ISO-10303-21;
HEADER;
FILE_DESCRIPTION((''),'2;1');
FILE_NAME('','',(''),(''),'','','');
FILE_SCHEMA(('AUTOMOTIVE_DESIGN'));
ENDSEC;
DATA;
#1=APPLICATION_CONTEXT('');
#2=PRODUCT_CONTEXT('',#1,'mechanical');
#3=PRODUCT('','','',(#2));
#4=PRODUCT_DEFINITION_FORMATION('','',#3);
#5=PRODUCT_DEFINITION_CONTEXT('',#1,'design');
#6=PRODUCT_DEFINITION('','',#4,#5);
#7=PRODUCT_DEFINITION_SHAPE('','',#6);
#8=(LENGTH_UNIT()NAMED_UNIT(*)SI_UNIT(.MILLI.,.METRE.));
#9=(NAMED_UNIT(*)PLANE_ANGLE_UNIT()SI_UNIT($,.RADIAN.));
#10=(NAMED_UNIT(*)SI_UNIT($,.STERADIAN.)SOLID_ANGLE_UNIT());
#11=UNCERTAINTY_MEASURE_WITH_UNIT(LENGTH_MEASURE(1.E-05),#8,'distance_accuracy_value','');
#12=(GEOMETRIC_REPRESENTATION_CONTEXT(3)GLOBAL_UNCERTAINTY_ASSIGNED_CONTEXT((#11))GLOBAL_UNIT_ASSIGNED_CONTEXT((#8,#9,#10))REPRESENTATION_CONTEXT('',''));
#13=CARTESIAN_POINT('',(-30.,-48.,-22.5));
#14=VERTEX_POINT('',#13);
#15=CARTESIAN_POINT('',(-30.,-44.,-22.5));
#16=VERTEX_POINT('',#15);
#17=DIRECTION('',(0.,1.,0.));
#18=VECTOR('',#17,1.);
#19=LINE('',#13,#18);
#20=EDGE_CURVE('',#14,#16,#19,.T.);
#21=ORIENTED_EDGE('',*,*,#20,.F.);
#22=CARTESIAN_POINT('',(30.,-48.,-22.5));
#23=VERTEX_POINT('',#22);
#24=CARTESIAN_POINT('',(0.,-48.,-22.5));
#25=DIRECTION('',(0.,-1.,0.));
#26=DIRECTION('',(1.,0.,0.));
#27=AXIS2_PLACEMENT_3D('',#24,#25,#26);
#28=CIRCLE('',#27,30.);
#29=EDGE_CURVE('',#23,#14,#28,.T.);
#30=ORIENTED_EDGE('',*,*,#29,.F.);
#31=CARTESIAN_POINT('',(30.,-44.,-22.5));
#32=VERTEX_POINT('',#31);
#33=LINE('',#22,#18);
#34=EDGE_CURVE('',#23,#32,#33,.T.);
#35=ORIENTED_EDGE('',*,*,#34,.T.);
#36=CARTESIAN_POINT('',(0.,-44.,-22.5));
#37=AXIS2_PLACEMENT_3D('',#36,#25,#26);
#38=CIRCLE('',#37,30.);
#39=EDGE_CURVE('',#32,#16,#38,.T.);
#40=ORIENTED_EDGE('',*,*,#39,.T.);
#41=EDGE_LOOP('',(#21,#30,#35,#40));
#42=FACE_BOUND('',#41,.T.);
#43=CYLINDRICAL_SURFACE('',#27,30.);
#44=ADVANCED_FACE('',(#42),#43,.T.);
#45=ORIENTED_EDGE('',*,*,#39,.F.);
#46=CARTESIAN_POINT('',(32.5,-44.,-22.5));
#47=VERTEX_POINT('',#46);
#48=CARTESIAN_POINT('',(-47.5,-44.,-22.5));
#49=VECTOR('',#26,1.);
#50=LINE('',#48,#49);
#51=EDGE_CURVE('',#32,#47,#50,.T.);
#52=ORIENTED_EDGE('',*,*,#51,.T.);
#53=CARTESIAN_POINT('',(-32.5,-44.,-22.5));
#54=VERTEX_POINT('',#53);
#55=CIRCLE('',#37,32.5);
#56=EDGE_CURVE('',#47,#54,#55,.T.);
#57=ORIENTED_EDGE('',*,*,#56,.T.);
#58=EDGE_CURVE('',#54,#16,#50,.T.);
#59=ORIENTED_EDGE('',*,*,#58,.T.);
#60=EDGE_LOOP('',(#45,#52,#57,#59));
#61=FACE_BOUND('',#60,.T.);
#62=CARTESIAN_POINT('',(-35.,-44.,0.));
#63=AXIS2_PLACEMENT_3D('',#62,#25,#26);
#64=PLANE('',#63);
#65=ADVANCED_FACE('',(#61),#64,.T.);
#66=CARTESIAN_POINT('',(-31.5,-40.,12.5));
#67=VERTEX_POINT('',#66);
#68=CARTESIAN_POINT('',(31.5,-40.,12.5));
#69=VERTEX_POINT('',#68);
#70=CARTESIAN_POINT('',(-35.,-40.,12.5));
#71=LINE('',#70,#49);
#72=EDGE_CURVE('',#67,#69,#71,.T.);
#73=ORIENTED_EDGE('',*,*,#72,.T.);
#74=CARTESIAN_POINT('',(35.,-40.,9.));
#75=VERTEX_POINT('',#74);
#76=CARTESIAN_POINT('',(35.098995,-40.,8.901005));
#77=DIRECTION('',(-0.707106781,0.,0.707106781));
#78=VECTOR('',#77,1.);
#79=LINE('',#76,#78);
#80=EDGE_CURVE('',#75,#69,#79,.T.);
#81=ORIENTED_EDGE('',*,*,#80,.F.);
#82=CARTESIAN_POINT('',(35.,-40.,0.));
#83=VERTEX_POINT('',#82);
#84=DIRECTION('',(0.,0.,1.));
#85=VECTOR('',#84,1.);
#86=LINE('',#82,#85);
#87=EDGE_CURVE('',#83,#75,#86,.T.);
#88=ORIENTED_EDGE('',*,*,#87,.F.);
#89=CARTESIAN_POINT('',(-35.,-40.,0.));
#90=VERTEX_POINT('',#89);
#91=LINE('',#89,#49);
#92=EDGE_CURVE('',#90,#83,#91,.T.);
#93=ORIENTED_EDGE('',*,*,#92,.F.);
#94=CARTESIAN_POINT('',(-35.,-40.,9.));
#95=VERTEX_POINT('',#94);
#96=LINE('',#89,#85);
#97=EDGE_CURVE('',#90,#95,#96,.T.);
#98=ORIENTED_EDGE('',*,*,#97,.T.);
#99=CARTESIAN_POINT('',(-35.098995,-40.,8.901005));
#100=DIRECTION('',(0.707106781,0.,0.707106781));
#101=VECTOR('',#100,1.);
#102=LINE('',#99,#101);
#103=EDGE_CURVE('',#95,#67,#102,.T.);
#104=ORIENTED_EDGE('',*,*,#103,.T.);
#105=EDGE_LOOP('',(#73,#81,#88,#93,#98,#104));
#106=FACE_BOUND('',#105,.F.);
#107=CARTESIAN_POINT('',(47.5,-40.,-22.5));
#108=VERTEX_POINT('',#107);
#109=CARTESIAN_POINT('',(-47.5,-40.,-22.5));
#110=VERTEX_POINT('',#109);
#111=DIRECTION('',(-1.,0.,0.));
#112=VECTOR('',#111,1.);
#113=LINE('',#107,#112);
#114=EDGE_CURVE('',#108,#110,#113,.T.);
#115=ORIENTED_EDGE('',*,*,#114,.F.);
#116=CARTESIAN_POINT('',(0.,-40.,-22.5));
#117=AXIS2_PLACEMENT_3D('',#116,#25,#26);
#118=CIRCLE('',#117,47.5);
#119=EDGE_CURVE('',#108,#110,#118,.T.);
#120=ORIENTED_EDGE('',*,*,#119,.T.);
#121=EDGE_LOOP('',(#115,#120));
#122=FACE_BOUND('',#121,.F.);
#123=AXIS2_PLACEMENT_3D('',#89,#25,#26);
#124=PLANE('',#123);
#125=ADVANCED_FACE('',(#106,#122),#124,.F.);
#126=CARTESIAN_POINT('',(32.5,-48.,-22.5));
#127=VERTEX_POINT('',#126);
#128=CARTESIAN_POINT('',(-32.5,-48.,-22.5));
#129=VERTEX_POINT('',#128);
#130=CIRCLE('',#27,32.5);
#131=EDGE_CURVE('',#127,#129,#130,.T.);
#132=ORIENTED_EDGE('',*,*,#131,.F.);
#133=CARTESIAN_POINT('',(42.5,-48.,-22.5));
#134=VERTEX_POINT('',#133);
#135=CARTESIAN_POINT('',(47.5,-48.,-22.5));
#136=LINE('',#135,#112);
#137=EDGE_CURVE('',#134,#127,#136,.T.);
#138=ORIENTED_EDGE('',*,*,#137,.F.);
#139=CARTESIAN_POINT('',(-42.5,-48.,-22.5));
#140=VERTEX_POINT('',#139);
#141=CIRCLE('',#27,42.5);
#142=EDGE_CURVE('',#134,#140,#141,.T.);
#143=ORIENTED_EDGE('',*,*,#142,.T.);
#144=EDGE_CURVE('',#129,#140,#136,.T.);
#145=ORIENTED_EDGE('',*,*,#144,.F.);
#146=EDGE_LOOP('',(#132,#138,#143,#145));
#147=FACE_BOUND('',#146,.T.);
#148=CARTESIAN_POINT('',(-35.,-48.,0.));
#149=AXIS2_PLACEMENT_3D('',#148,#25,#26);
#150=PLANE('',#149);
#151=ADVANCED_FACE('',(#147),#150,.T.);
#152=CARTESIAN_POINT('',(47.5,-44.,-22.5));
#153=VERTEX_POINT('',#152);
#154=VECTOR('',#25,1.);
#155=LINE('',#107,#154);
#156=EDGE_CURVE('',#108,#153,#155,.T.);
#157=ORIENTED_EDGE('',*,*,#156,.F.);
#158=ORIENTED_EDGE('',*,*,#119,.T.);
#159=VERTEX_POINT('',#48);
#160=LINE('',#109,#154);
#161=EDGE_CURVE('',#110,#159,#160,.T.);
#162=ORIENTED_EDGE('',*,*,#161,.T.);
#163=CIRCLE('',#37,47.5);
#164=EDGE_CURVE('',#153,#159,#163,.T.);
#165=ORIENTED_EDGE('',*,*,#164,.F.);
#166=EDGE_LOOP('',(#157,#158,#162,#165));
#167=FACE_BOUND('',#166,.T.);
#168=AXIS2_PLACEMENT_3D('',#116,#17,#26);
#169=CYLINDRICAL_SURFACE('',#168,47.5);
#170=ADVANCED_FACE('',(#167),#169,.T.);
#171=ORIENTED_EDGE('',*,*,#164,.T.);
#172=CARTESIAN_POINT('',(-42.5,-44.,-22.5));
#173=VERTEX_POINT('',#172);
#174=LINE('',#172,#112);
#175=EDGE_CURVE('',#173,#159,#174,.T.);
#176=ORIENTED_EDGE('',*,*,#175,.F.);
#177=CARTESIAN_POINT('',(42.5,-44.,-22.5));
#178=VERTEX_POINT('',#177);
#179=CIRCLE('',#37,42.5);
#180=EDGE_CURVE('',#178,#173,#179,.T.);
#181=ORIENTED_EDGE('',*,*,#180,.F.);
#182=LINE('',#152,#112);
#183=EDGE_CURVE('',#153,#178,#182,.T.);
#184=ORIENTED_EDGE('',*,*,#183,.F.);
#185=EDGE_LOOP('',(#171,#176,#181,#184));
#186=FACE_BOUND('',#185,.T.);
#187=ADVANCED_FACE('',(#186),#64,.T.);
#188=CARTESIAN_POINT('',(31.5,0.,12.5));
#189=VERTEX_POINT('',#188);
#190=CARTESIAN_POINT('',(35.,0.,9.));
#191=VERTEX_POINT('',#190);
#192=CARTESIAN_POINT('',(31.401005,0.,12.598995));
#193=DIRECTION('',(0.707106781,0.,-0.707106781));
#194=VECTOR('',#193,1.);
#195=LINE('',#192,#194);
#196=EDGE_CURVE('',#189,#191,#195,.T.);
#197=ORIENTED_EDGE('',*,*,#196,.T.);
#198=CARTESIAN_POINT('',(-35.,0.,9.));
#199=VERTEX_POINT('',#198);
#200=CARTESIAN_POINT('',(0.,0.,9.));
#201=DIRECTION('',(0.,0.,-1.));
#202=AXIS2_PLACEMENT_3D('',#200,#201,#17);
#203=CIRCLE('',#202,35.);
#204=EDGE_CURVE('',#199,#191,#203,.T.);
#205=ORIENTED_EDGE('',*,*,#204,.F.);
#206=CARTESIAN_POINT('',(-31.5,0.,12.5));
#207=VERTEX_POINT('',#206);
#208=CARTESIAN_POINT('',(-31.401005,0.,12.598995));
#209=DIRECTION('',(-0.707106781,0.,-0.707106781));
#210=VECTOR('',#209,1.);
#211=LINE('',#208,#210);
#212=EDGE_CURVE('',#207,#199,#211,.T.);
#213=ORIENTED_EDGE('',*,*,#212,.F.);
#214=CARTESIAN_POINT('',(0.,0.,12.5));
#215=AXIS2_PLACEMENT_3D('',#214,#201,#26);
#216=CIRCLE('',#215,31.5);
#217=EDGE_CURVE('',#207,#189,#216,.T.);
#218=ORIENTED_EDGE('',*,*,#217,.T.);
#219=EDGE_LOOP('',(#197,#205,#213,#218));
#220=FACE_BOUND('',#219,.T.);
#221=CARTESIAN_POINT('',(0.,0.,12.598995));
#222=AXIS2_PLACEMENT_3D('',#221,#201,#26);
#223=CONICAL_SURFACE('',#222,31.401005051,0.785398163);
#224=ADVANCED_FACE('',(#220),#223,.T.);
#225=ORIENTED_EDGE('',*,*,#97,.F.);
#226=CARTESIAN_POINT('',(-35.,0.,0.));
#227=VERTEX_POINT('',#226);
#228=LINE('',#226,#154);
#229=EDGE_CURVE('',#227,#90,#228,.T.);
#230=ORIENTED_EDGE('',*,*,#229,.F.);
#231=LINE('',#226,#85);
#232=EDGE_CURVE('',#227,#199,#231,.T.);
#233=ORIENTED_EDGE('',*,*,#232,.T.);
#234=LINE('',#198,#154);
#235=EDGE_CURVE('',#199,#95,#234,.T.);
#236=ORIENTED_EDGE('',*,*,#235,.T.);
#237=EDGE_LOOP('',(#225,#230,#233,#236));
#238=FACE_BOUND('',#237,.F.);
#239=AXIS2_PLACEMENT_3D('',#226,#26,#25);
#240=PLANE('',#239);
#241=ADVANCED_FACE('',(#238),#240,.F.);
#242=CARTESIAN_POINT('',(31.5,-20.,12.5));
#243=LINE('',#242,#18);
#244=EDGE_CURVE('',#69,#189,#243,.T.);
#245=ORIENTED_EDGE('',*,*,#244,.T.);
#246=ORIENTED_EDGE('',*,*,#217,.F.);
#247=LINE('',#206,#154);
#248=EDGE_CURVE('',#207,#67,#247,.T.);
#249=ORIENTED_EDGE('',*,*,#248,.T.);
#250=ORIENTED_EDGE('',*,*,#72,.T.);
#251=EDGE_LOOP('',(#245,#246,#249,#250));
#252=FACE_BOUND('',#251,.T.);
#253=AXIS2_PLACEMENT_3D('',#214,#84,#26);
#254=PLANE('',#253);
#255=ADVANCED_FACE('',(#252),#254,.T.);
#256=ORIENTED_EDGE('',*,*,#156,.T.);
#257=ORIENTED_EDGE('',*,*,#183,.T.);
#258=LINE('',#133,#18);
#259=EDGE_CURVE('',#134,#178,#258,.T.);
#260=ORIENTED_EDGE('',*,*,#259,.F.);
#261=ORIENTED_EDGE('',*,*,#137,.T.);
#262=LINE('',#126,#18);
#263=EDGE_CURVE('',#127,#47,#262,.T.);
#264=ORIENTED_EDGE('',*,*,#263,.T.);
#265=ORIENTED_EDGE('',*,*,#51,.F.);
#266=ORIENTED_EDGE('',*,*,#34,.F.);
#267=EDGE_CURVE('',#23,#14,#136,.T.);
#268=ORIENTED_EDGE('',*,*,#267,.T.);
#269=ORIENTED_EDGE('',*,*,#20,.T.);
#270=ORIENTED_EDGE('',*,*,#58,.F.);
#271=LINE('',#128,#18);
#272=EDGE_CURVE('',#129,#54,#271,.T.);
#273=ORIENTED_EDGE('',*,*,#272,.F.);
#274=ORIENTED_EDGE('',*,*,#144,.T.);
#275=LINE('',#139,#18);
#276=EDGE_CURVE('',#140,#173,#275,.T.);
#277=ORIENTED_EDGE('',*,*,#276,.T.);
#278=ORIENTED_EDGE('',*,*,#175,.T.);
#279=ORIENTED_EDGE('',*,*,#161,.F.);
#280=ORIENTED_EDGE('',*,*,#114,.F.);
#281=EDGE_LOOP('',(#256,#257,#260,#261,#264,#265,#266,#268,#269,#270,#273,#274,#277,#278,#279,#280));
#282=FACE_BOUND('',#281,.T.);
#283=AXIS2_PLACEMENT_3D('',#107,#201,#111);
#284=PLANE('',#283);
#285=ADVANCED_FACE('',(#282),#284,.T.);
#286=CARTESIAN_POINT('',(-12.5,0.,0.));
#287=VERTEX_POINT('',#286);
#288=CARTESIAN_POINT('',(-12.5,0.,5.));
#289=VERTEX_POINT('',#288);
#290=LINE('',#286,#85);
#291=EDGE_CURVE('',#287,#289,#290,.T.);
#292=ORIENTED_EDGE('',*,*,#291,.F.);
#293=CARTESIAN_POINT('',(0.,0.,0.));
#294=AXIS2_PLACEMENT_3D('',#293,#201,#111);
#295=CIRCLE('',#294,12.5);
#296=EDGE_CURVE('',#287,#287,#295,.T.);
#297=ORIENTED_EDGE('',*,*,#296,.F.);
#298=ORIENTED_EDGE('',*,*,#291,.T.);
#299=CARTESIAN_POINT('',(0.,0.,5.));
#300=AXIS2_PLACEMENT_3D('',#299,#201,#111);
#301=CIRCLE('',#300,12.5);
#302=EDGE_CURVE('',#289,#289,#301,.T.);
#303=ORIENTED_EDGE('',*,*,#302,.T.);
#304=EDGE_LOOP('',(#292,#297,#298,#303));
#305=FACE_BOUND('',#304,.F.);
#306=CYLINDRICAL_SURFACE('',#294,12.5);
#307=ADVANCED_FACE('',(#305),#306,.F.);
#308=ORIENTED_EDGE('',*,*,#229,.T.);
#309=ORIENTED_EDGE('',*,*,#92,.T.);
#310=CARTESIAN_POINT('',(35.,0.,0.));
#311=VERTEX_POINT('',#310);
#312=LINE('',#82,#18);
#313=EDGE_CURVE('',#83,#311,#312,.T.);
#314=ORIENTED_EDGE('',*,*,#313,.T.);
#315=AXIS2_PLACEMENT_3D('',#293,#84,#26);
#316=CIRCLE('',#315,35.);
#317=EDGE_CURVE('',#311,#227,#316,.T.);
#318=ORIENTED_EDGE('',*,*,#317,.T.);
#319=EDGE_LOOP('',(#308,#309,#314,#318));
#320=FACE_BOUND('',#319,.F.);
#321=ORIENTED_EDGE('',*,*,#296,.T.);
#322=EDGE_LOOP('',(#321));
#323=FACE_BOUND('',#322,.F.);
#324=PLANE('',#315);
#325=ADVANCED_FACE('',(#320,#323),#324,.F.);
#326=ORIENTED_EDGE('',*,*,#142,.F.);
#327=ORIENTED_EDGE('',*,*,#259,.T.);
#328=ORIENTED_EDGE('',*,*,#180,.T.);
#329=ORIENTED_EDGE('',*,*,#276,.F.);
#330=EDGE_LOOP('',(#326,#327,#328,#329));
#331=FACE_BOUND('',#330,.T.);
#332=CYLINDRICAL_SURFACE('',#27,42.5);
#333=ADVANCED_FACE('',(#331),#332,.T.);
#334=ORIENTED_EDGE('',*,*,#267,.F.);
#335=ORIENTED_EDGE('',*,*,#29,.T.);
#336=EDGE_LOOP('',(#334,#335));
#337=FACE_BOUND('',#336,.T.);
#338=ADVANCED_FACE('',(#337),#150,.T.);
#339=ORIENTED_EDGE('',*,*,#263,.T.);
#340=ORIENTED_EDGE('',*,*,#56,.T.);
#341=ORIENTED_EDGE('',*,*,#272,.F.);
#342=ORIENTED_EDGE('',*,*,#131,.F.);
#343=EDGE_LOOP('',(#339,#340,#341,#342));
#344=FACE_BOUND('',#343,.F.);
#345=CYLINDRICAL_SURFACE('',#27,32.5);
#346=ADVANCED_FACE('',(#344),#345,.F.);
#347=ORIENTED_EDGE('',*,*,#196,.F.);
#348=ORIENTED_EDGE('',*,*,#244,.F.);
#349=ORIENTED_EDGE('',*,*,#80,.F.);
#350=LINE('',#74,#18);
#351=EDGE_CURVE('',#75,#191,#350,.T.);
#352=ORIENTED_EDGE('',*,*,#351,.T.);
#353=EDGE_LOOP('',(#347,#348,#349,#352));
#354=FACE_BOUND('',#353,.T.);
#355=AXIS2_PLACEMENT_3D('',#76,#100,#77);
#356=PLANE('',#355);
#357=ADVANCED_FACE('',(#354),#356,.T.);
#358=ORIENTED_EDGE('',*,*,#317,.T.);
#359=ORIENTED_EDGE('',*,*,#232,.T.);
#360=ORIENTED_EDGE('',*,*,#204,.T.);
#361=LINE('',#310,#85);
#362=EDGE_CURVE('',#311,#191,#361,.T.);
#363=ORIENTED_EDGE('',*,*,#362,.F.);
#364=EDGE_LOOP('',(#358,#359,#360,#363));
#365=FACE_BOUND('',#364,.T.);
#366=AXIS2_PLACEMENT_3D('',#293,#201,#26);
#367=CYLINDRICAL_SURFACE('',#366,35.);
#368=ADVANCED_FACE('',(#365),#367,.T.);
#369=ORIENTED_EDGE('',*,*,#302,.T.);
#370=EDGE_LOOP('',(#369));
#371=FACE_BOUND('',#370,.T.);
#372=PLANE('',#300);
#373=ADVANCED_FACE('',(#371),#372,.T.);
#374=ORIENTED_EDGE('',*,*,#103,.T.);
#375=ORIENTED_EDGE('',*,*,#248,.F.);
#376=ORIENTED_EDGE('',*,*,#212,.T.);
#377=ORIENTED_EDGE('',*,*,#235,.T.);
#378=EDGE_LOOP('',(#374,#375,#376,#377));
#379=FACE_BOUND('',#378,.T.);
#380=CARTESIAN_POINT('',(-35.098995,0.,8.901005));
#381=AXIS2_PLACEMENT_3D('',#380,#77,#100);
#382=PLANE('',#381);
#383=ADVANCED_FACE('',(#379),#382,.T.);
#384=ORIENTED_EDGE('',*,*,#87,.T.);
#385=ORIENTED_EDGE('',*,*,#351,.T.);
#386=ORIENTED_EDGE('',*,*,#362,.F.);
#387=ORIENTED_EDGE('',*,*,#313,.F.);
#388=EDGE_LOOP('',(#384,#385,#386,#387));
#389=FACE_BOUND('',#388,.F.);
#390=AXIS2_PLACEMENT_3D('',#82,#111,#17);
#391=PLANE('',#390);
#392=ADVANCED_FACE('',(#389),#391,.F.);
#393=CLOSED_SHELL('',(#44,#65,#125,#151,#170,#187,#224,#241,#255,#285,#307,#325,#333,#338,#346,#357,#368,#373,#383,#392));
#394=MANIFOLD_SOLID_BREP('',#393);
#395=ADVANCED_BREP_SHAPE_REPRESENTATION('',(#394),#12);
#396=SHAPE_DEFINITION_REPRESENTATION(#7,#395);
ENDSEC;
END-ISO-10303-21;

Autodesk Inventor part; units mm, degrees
ref_plane "YZ Plane" through (0, 0, 0) normal (1, 0, 0) x (0, 1, 0)
ref_plane "XZ Plane" through (0, 0, 0) normal (0, 1, 0) x (-1, 0, 0)
ref_plane "XY Plane" through (0, 0, 0) normal (0, 0, 1) x (1, 0, 0)
sketch "Sketch1" plane through (0, 0, 0) normal (0, 0, 1) x (1, 0, 0)
  circle A0 centre (0, 0) radius 35
  line L0 (-35, 0) -> (-35, -40)
  line L1 (-35, -40) -> (35, -40)
  line L2 (35, -40) -> (35, 0)
  dimension "d0" = 70
  dimension "d1" = 40
extrude "Extrusion1" add sketch "Sketch1" along normal blind 12.5
sketch "Sketch2" plane through (-35, -40, 0) normal (0, -1, 0) x (1, 0, 0)
  arc A0 (82.5, -22.5) -> (-12.5, -22.5) centre (35, -22.5) ccw
  line L0 (0, 12.5) -> (70, 12.5) construction
  line L1 (35, 12.5) -> (35, 0)
  line L2 (82.5, -22.5) -> (-12.5, -22.5)
  arc A1 (-12.5, -22.5) -> (82.5, -22.5) centre (35, -22.5) ccw construction
  dimension "d4" = 95
  dimension "d6" = 35
extrude "Extrusion2" add sketch "Sketch2" along normal blind 8
chamfer "Chamfer1" distance 3.5 angle 45 3 edges at (0, 35, 12.5) (-35, -20, 12.5) (35, -20, 12.5)
sketch "Sketch3" plane through (0, 0, 0) normal (0, 0, -1) x (-1, 0, 0)
  circle A0 centre (0, 0) radius 12.5
  dimension "d12" = 25
extrude "Extrusion3" cut sketch "Sketch3" against normal blind 5
sketch "Sketch4" plane through (-35, -48, 0) normal (0, -1, 0) x (1, 0, 0)
  arc A0 (82.5, -22.5) -> (-12.5, -22.5) centre (35, -22.5) ccw projected
  arc A1 (77.5, -22.5) -> (-7.5, -22.5) centre (35, -22.5) ccw
  arc A2 (82.5, -22.5) -> (-12.5, -22.5) centre (35, -22.5) ccw projected
  line L0 (-7.5, -22.5) -> (-12.5, -22.5)
  line L1 (82.5, -22.5) -> (77.5, -22.5)
  line L2 (-12.5, -22.5) -> (82.5, -22.5) projected
  circle A3 centre (35, -22.5) radius 32.5
  circle A4 centre (35, -22.5) radius 30
  point P0 (35, 0)
  point P1 (5, -22.5)
  point P2 (65, -22.5)
  point P3 (67.5, -22.5)
  point P4 (2.5, -22.5)
  dimension "d16" = 5
  dimension "d20" = 65
  dimension "d21" = 60
extrude "Extrusion4" cut sketch "Sketch4" against normal blind 4 contours L1 A1 L0 A0 | L2 A4 A3 picked at (43.6934, 7.7339)
properties part number "Base 1 right"
